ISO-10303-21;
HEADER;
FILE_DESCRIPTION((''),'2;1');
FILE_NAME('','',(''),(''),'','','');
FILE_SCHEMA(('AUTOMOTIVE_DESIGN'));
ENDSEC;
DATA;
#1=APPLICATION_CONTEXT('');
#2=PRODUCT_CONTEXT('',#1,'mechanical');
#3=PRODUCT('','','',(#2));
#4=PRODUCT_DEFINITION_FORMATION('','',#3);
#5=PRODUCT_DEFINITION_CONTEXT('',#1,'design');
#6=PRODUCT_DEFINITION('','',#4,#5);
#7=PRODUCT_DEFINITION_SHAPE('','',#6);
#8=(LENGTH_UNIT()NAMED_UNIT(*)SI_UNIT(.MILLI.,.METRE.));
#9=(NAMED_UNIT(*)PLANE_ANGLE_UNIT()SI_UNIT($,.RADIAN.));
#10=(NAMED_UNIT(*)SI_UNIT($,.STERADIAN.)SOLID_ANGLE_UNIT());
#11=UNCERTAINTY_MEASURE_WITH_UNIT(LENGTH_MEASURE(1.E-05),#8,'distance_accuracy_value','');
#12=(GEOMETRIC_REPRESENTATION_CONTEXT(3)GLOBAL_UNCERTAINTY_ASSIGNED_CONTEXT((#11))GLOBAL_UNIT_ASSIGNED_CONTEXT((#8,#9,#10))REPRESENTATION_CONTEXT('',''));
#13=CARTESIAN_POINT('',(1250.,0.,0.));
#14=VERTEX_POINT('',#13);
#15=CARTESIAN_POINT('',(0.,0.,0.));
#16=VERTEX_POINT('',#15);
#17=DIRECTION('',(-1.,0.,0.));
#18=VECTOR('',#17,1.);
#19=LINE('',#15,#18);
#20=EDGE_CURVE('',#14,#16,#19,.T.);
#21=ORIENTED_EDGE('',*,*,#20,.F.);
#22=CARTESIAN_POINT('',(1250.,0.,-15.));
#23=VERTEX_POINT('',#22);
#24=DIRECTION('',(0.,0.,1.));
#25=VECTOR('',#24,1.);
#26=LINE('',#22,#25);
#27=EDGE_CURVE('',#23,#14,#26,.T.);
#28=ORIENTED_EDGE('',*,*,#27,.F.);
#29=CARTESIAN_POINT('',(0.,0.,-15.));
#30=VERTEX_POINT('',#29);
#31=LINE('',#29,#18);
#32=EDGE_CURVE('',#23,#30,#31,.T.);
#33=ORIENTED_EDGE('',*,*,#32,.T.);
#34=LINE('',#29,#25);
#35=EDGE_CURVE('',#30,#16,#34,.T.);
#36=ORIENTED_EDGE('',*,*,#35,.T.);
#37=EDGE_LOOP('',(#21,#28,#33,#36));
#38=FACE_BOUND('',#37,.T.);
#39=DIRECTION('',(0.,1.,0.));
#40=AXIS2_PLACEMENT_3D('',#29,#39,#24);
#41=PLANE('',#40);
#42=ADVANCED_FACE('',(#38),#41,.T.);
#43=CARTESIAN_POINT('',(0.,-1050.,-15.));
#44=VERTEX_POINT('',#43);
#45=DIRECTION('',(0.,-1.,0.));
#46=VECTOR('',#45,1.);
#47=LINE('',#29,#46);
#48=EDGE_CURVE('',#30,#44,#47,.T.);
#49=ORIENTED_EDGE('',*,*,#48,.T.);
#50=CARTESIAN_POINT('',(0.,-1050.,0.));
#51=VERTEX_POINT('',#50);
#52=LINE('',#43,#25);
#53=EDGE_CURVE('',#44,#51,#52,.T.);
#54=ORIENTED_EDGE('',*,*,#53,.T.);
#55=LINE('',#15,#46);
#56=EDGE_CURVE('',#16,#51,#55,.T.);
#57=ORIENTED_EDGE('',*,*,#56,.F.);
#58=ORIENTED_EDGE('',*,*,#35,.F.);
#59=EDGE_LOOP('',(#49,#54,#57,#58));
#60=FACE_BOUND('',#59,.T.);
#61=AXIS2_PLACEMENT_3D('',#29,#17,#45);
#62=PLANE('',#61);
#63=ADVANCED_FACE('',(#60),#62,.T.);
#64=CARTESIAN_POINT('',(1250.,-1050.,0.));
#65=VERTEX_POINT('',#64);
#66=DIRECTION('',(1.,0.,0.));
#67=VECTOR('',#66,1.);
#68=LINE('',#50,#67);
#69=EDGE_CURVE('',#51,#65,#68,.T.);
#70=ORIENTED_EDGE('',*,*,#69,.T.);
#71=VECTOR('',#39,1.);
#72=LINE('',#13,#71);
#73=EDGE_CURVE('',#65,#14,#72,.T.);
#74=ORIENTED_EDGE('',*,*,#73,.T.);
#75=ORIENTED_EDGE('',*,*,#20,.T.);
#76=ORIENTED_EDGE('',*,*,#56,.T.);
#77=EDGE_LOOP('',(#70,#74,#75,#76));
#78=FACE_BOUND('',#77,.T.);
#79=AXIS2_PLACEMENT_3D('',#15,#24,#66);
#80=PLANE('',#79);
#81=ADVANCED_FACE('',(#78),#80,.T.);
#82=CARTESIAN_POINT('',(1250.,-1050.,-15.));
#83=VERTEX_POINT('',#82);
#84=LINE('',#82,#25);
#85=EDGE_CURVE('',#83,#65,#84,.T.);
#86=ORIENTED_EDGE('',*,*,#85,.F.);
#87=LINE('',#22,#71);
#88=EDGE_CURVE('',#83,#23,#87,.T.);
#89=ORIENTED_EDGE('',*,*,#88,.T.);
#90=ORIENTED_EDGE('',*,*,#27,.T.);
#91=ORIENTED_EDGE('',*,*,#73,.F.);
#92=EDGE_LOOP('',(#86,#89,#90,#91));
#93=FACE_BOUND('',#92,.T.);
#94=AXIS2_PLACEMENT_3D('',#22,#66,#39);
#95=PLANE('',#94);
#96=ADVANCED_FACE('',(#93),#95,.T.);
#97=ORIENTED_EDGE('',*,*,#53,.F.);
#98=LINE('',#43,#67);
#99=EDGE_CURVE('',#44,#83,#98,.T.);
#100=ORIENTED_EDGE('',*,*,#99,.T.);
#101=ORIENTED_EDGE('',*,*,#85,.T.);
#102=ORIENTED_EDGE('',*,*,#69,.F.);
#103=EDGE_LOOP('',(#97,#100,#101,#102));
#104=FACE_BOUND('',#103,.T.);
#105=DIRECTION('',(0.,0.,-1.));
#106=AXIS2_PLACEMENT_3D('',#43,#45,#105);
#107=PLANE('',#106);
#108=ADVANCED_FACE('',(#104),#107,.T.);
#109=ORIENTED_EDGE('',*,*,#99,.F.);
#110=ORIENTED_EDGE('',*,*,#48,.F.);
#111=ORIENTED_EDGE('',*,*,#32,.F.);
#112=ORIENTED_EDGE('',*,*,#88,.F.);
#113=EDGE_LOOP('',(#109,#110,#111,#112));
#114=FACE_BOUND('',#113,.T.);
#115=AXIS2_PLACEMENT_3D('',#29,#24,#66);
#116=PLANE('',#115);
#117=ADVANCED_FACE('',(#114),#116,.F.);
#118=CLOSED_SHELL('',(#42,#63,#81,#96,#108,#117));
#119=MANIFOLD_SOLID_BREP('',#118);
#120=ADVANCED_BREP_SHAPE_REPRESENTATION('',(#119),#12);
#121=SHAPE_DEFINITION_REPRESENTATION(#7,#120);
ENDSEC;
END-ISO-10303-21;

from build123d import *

# Parameters (mm, degrees)
IZIM1_W            = 1250
IZIM1_H            = 1050
TABAN_FLAN_1_DEPTH = 15


# Sheet-metal steps are written as plain solids
with BuildPart() as part:
    # Çizim1 → Taban-Flanş1 (new body)
    with BuildSketch(Plane.XY):
        with Locations((625, -525)):
            Rectangle(IZIM1_W, IZIM1_H)
    extrude(amount=-TABAN_FLAN_1_DEPTH)


solid = part.part
